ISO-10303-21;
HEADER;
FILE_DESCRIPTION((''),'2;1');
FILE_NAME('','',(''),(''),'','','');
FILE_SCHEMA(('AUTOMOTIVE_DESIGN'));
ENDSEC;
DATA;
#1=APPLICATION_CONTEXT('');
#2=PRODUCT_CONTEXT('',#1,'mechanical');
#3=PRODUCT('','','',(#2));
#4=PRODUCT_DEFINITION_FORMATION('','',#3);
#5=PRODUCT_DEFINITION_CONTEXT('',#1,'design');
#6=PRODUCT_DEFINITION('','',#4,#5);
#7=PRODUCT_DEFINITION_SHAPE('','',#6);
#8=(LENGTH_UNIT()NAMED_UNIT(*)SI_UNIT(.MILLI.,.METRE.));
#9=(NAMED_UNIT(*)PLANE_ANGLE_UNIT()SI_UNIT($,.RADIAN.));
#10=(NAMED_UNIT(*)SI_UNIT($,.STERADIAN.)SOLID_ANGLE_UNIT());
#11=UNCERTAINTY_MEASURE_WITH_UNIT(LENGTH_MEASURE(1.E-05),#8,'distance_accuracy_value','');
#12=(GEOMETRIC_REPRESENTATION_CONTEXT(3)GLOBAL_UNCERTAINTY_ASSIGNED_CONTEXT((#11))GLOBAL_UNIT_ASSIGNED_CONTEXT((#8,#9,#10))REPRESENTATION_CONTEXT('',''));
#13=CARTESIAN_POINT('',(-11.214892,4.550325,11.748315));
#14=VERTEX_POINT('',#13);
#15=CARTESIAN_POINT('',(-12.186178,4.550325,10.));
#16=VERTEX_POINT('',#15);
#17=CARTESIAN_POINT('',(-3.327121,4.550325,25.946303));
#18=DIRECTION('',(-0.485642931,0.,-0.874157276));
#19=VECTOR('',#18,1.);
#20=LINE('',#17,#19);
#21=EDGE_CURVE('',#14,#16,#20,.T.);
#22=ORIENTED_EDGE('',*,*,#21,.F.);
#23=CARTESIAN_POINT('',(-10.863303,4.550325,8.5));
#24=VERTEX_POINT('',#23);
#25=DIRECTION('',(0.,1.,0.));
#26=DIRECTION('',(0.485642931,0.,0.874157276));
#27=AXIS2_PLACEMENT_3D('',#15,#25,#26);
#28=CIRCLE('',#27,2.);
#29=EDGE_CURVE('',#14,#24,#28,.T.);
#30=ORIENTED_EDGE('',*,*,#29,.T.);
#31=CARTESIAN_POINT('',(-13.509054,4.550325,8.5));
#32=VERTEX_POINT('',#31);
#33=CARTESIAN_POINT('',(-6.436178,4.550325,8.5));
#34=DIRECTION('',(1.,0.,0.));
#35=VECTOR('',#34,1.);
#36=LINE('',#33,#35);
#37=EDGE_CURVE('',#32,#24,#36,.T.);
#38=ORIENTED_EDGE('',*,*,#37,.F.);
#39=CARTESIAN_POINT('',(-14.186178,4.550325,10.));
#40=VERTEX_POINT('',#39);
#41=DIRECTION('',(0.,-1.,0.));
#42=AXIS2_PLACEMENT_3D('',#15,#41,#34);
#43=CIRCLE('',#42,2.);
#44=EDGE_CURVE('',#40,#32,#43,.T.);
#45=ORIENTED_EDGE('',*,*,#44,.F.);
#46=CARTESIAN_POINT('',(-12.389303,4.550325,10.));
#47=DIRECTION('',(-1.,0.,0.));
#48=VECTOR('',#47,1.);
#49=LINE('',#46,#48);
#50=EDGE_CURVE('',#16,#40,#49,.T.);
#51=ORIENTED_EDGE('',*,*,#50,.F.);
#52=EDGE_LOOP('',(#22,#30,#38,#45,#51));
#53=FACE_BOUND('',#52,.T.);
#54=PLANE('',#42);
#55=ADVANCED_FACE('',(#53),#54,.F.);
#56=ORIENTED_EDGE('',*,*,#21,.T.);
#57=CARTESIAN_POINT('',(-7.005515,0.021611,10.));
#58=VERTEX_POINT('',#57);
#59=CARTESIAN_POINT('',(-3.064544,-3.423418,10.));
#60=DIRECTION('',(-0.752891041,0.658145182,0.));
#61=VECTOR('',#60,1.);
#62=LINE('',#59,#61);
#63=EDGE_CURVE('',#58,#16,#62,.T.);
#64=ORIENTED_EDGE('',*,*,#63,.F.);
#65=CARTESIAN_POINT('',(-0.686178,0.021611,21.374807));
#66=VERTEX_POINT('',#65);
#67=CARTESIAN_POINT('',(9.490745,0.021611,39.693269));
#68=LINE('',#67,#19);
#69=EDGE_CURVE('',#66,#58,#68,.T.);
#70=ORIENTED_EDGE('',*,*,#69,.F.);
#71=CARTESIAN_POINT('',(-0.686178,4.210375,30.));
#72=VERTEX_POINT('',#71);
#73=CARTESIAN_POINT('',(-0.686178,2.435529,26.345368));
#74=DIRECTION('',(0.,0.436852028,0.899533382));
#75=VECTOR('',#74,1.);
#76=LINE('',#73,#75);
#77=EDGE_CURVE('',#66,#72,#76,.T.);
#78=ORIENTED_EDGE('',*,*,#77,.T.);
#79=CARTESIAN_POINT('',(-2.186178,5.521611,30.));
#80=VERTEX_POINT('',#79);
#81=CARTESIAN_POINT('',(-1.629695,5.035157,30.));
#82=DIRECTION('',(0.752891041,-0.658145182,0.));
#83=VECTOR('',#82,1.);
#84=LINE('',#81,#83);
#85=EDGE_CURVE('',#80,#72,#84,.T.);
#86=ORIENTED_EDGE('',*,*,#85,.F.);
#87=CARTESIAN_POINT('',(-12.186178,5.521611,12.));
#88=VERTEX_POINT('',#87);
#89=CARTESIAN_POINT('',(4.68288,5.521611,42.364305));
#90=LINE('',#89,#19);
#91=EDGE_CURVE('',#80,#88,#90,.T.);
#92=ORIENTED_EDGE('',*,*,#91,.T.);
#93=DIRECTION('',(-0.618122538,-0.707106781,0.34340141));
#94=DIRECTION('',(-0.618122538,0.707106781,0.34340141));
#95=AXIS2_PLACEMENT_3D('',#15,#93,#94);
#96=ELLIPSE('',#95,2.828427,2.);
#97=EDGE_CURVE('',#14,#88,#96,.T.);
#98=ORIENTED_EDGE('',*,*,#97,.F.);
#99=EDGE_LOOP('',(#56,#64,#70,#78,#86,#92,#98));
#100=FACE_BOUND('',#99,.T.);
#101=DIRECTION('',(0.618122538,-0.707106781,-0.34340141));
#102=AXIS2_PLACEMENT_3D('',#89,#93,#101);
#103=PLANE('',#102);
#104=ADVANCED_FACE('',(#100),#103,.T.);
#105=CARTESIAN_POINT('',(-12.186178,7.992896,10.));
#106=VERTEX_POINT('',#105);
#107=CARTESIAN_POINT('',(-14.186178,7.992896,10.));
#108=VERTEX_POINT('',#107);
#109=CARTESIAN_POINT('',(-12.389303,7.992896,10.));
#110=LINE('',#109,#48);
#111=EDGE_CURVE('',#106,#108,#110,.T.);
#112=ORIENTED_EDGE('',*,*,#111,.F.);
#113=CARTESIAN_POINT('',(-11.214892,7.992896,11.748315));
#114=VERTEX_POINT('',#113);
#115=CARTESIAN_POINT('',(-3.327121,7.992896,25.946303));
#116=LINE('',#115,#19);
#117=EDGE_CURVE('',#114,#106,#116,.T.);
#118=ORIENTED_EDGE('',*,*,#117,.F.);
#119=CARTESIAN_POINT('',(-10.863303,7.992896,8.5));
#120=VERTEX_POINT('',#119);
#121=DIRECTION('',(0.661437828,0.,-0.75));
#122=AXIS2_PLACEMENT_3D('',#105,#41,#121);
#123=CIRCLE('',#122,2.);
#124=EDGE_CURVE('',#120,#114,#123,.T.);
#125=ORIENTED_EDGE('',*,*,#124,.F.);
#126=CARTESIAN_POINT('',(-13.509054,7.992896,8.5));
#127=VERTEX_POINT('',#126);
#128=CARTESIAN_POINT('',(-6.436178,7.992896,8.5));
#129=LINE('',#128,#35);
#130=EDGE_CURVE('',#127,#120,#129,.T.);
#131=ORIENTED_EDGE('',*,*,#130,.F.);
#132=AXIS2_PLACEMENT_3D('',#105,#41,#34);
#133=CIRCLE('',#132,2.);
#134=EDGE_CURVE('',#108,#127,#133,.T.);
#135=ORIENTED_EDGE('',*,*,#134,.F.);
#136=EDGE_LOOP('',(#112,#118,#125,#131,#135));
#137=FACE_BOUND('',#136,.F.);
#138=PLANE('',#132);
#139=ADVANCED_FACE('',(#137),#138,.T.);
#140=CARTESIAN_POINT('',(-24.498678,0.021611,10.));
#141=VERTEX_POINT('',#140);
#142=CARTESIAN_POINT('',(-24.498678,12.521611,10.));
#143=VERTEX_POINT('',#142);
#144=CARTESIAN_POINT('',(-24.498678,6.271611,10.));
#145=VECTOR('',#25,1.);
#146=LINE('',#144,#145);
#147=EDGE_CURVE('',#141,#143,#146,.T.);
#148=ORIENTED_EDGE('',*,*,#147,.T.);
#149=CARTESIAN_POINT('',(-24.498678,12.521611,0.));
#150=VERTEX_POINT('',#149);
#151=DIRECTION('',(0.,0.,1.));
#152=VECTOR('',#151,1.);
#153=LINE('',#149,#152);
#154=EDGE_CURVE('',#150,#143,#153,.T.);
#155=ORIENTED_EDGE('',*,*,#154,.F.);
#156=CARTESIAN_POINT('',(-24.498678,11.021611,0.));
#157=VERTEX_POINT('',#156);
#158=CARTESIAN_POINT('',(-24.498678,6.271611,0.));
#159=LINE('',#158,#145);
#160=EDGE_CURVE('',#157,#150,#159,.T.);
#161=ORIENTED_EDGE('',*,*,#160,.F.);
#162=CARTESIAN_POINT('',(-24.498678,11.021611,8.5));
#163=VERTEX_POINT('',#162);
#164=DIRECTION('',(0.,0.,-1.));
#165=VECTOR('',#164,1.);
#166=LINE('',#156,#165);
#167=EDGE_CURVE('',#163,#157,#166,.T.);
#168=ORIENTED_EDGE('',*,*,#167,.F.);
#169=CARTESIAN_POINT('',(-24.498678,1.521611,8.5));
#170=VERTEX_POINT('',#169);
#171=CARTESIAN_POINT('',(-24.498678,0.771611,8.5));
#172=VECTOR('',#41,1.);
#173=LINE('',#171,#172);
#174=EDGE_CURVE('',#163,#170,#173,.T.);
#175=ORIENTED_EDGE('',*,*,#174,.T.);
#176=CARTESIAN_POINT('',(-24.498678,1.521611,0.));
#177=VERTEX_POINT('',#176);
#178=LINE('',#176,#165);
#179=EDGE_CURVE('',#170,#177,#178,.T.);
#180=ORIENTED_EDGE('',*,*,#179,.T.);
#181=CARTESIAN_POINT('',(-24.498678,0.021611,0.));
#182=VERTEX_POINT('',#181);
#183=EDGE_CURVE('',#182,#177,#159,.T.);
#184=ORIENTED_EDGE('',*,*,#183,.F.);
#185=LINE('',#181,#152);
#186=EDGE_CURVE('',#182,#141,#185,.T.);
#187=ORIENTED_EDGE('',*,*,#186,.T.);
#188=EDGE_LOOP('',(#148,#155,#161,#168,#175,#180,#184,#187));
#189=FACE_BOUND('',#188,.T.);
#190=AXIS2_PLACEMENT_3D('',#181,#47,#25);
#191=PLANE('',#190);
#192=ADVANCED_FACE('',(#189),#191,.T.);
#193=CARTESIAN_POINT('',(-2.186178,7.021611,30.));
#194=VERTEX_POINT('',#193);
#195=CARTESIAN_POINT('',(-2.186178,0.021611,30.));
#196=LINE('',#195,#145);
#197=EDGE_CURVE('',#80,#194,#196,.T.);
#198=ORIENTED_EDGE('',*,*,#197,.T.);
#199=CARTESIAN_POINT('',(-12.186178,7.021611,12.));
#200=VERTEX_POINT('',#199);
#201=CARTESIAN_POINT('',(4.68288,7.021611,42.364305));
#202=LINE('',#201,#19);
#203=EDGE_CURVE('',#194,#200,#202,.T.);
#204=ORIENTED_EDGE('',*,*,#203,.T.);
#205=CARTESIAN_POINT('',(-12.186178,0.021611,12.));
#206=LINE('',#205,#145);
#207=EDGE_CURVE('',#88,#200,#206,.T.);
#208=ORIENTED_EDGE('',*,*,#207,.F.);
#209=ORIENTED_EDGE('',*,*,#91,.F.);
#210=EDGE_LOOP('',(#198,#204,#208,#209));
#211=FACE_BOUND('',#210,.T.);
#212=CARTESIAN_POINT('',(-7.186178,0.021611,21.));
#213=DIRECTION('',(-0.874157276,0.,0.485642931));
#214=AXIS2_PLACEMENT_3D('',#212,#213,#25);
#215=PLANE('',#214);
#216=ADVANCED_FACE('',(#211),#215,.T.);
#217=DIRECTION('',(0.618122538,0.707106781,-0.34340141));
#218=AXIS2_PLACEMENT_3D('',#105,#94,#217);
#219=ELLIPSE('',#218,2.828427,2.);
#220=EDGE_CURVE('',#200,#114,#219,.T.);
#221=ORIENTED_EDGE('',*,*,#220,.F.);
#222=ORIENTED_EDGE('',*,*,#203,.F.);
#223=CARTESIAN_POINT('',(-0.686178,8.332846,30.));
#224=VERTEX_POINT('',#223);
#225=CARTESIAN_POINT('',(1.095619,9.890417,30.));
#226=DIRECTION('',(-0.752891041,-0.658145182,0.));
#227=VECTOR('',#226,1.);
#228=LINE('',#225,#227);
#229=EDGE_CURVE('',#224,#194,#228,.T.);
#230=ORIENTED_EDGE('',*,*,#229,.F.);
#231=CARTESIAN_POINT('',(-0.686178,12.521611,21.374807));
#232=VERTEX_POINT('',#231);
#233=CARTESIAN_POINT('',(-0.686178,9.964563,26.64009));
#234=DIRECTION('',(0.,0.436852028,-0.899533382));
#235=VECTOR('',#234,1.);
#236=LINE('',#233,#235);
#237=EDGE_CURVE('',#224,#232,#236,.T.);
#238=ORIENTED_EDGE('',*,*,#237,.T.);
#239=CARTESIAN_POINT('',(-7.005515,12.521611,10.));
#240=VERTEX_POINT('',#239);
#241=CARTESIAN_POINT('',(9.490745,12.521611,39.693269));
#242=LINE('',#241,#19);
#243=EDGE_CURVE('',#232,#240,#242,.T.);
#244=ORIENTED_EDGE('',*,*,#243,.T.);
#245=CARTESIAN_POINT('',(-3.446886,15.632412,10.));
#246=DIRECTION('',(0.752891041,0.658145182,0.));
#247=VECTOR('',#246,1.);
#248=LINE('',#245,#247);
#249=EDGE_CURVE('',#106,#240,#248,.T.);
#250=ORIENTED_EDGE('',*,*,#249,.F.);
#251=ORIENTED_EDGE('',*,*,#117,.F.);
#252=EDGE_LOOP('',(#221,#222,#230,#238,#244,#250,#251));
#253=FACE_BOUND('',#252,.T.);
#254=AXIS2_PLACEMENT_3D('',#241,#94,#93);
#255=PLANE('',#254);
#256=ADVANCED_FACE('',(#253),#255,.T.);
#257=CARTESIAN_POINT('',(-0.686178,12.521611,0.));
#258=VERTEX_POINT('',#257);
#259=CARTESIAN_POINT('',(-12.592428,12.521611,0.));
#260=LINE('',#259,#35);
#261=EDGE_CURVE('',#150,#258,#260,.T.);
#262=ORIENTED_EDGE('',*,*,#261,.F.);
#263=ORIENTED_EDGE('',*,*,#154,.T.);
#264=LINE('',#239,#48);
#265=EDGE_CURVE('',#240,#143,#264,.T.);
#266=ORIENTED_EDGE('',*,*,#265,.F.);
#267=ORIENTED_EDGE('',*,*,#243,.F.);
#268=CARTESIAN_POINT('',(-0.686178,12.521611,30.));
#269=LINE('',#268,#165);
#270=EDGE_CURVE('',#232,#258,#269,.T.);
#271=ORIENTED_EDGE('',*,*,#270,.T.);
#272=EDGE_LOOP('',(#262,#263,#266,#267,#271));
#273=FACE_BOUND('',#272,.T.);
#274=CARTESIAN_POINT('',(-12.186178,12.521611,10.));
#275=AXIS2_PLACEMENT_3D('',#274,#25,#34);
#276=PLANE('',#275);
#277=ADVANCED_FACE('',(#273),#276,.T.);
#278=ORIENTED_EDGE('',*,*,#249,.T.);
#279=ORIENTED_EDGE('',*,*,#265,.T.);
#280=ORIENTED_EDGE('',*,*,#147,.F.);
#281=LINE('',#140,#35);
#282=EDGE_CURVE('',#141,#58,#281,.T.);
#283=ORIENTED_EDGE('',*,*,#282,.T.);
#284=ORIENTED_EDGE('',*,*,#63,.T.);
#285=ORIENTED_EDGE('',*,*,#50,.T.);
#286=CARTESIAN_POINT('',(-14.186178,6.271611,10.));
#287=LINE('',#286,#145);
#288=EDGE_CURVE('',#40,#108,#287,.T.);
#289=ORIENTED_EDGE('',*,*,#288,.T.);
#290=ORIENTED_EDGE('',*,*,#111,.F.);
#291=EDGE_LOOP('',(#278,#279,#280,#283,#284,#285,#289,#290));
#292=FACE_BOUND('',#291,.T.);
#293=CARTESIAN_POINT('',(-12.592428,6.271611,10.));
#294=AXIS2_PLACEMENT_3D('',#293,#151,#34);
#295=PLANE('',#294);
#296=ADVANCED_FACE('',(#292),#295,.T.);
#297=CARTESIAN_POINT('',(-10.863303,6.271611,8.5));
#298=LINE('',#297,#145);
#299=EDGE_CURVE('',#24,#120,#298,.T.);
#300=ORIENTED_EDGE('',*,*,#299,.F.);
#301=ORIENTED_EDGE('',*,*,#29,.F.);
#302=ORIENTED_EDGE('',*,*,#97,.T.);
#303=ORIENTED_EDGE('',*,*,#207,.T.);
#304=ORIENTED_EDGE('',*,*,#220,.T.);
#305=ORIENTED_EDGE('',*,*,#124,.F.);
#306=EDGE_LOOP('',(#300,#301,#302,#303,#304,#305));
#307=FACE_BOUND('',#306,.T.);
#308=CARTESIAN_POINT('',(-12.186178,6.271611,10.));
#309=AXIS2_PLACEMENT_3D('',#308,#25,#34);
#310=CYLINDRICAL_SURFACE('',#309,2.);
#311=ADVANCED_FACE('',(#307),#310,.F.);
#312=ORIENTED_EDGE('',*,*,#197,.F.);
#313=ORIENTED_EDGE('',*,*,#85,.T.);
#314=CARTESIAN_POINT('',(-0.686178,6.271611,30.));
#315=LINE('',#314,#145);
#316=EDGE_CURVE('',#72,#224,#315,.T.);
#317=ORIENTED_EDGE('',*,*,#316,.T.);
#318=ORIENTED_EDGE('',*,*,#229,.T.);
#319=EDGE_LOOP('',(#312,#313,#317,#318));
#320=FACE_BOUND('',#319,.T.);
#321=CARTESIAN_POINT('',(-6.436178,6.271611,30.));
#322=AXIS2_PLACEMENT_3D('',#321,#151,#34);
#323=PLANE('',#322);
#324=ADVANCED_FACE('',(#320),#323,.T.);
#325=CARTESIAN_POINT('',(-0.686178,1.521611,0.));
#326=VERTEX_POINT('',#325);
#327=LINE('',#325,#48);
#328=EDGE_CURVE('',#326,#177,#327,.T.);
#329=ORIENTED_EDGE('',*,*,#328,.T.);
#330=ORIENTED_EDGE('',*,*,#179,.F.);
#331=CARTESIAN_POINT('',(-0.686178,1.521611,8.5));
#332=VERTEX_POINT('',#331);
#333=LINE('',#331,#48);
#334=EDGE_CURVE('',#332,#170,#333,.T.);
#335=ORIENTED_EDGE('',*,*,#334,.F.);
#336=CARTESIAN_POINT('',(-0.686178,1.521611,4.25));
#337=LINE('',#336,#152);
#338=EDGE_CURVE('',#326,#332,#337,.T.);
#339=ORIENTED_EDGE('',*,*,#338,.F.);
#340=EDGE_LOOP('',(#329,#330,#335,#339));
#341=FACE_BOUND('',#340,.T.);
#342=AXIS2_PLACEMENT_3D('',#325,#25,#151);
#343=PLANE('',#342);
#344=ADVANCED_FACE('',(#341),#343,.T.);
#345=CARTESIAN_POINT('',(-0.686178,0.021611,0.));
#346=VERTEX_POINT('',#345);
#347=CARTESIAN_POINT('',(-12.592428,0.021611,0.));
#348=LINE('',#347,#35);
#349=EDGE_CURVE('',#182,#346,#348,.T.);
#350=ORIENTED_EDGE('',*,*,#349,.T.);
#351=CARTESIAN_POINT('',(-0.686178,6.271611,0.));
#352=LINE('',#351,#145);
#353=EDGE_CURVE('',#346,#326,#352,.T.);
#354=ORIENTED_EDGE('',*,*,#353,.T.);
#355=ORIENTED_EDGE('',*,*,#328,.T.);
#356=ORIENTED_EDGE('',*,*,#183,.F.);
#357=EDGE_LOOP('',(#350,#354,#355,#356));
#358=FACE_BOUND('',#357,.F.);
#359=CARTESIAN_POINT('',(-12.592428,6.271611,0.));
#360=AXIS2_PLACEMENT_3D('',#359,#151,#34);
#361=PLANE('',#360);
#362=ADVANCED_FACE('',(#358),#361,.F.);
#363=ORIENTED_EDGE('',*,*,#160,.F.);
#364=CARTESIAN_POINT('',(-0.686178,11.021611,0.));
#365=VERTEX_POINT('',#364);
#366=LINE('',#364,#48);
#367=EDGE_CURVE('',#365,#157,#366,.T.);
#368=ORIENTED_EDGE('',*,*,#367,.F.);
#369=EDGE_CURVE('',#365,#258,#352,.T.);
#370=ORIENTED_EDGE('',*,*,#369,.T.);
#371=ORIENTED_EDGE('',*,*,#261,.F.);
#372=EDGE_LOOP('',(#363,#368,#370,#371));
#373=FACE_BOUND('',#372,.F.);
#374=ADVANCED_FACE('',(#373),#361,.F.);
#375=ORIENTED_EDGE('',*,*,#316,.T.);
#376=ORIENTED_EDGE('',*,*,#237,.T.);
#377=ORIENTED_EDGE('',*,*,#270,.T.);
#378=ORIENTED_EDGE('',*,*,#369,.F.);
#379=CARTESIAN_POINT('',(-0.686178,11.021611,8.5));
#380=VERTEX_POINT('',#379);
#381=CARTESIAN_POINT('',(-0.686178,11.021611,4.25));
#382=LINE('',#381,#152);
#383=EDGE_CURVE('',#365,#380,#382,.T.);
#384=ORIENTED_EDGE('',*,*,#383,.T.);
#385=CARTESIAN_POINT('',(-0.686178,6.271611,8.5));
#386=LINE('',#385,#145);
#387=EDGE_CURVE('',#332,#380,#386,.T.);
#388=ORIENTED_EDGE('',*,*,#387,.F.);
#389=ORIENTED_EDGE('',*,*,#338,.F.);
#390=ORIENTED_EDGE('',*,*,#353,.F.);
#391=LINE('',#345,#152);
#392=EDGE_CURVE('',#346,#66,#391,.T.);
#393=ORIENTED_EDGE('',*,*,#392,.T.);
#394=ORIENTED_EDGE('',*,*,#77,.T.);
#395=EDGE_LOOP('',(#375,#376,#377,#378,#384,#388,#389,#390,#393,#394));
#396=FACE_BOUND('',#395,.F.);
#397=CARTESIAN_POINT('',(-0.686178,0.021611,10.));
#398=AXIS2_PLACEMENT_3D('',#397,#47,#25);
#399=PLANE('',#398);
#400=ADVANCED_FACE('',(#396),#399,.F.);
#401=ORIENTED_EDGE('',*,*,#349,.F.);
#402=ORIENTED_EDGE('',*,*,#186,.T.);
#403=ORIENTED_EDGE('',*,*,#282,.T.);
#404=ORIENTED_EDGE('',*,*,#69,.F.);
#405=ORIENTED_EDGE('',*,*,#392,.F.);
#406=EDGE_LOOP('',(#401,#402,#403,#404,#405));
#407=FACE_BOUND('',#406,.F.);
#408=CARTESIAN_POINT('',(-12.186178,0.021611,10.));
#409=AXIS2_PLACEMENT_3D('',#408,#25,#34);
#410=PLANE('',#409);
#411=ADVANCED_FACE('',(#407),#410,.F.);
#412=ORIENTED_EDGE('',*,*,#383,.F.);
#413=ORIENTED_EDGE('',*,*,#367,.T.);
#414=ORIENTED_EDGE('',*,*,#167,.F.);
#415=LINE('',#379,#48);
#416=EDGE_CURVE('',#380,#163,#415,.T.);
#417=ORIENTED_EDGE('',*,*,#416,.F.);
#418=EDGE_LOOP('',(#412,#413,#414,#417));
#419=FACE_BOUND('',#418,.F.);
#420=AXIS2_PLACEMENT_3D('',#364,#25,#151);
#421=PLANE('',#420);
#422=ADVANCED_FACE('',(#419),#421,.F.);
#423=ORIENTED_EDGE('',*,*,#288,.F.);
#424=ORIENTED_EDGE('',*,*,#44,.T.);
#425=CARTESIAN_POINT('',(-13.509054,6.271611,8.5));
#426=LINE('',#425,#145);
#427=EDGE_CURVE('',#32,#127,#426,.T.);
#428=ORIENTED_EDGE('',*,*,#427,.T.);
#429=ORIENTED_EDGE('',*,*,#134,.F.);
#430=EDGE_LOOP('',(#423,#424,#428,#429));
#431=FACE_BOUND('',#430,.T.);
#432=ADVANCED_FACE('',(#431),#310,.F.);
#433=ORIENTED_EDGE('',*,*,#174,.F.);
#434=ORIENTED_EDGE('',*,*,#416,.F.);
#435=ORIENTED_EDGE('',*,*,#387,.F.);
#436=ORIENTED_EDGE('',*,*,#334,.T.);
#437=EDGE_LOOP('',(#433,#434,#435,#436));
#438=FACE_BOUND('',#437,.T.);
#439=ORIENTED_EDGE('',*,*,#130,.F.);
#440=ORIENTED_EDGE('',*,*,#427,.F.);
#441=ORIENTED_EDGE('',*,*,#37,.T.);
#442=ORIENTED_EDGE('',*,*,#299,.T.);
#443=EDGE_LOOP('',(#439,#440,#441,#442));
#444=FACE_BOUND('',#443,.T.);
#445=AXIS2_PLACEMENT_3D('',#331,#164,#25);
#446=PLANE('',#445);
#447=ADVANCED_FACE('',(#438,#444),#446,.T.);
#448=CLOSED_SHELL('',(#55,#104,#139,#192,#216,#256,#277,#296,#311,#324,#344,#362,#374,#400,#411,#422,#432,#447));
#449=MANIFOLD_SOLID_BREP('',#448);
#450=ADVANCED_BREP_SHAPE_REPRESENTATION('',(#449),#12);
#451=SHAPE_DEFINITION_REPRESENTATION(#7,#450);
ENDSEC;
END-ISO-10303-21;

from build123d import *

# Parameters (mm, degrees)
F0_W        = 23.8125
F0_H        = 12.5
F1_DEPTH    = 10
F2_W        = 9.5
F2_H        = 8.5
F3_DEPTH    = 23.8135
F4_W        = 11.5
F4_H        = 12.5
F5_DEPTH    = 20
F6_SIZE2    = 18
F6_SIZE     = 10
F7_T4_DEPTH = 48.8797731496
F7_T9_DEPTH = 48.8797731496
F8_W        = 2
F8_H        = 3.4425717247


# Not quite as in the source:
# - a fillet or chamfer that OpenCascade refuses, or shapes differently, is made with other operations: its cross-section is extruded or revolved along the edge and cut away or added


with BuildPart() as f1:
    # F0 (on Top) → F1 (new body)
    with BuildSketch(Plane.XY):
        with Locations((-12.5924281826, 6.2716105528)):
            Rectangle(F0_W, F0_H)
    extrude(amount=F1_DEPTH)

    # F2 (on face) → F3 (cut, through all)
    with BuildSketch(Plane.YZ.offset(-0.6861781826)):
        with Locations((6.2716105528, 4.25)):
            Rectangle(F2_W, F2_H)
    extrude(amount=-F3_DEPTH, mode=Mode.SUBTRACT)

    # F4 (on face) → F5 (join)
    with BuildSketch(Plane.XY.offset(10)):
        with Locations((-6.4361781826, 6.2716105528)):
            Rectangle(F4_W, F4_H)
    extrude(amount=F5_DEPTH)

    # F6
    f6_edges = [f1.edges().sort_by_distance(p)[0] for p in [
        (-12.186178, 6.271611, 30),
    ]]
    f6_side = f1.faces().sort_by_distance((-6.436178, 6.271611, 30))[0]
    chamfer(f6_edges, length=F6_SIZE, length2=F6_SIZE2, reference=f6_side)

    # F7: chamfer of 5.5 on 2 edges, made by hand


with BuildPart() as f7_tool2:
    # F7_s3 → F7_t4 (new body)
    with BuildSketch(Plane(origin=(19.0892991485, 0, 34.3607384673), x_dir=(0, 1, 0), z_dir=(-0.4856429312, 0, -0.8741572761))):
        Polygon((12.5216105528, -10.9803515006), (7.0216105528, -16.4803515006), (12.5216105528, -16.4803515006), align=None)
    extrude(amount=F7_T4_DEPTH)

    split(bisect_by=Plane.XY.offset(10), keep=Keep.TOP)


with BuildPart() as f1_1:
    add(f1.part)

    # F7_t1: cut F7_tool2
    add(f7_tool2.part, mode=Mode.SUBTRACT)


with BuildPart() as f7_tool7:
    # F7_s8 → F7_t9 (new body)
    with BuildSketch(Plane(origin=(19.0892991485, 0, 34.3607384673), x_dir=(0, 1, 0), z_dir=(-0.4856429312, 0, -0.8741572761))):
        Polygon((5.5216105528, -16.4803515006), (0.0216105528, -10.9803515006), (0.0216105528, -16.4803515006), align=None)
    extrude(amount=F7_T9_DEPTH)

    split(bisect_by=Plane.XY.offset(10), keep=Keep.TOP)


with BuildPart() as f1_2:
    add(f1_1.part)

    # F7_t6: cut F7_tool7
    add(f7_tool7.part, mode=Mode.SUBTRACT)

    # F8 (on face) → F9 (revolve, cut)
    with BuildSketch(Plane.XY.offset(10)):
        with Locations((-11.1861781826, 6.2716105528)):
            Rectangle(F8_W, F8_H)
    revolve(axis=Axis((-12.1861781826, 6.2716105528, 10), (0, -1, 0)), mode=Mode.SUBTRACT)


solid = f1_2.part
